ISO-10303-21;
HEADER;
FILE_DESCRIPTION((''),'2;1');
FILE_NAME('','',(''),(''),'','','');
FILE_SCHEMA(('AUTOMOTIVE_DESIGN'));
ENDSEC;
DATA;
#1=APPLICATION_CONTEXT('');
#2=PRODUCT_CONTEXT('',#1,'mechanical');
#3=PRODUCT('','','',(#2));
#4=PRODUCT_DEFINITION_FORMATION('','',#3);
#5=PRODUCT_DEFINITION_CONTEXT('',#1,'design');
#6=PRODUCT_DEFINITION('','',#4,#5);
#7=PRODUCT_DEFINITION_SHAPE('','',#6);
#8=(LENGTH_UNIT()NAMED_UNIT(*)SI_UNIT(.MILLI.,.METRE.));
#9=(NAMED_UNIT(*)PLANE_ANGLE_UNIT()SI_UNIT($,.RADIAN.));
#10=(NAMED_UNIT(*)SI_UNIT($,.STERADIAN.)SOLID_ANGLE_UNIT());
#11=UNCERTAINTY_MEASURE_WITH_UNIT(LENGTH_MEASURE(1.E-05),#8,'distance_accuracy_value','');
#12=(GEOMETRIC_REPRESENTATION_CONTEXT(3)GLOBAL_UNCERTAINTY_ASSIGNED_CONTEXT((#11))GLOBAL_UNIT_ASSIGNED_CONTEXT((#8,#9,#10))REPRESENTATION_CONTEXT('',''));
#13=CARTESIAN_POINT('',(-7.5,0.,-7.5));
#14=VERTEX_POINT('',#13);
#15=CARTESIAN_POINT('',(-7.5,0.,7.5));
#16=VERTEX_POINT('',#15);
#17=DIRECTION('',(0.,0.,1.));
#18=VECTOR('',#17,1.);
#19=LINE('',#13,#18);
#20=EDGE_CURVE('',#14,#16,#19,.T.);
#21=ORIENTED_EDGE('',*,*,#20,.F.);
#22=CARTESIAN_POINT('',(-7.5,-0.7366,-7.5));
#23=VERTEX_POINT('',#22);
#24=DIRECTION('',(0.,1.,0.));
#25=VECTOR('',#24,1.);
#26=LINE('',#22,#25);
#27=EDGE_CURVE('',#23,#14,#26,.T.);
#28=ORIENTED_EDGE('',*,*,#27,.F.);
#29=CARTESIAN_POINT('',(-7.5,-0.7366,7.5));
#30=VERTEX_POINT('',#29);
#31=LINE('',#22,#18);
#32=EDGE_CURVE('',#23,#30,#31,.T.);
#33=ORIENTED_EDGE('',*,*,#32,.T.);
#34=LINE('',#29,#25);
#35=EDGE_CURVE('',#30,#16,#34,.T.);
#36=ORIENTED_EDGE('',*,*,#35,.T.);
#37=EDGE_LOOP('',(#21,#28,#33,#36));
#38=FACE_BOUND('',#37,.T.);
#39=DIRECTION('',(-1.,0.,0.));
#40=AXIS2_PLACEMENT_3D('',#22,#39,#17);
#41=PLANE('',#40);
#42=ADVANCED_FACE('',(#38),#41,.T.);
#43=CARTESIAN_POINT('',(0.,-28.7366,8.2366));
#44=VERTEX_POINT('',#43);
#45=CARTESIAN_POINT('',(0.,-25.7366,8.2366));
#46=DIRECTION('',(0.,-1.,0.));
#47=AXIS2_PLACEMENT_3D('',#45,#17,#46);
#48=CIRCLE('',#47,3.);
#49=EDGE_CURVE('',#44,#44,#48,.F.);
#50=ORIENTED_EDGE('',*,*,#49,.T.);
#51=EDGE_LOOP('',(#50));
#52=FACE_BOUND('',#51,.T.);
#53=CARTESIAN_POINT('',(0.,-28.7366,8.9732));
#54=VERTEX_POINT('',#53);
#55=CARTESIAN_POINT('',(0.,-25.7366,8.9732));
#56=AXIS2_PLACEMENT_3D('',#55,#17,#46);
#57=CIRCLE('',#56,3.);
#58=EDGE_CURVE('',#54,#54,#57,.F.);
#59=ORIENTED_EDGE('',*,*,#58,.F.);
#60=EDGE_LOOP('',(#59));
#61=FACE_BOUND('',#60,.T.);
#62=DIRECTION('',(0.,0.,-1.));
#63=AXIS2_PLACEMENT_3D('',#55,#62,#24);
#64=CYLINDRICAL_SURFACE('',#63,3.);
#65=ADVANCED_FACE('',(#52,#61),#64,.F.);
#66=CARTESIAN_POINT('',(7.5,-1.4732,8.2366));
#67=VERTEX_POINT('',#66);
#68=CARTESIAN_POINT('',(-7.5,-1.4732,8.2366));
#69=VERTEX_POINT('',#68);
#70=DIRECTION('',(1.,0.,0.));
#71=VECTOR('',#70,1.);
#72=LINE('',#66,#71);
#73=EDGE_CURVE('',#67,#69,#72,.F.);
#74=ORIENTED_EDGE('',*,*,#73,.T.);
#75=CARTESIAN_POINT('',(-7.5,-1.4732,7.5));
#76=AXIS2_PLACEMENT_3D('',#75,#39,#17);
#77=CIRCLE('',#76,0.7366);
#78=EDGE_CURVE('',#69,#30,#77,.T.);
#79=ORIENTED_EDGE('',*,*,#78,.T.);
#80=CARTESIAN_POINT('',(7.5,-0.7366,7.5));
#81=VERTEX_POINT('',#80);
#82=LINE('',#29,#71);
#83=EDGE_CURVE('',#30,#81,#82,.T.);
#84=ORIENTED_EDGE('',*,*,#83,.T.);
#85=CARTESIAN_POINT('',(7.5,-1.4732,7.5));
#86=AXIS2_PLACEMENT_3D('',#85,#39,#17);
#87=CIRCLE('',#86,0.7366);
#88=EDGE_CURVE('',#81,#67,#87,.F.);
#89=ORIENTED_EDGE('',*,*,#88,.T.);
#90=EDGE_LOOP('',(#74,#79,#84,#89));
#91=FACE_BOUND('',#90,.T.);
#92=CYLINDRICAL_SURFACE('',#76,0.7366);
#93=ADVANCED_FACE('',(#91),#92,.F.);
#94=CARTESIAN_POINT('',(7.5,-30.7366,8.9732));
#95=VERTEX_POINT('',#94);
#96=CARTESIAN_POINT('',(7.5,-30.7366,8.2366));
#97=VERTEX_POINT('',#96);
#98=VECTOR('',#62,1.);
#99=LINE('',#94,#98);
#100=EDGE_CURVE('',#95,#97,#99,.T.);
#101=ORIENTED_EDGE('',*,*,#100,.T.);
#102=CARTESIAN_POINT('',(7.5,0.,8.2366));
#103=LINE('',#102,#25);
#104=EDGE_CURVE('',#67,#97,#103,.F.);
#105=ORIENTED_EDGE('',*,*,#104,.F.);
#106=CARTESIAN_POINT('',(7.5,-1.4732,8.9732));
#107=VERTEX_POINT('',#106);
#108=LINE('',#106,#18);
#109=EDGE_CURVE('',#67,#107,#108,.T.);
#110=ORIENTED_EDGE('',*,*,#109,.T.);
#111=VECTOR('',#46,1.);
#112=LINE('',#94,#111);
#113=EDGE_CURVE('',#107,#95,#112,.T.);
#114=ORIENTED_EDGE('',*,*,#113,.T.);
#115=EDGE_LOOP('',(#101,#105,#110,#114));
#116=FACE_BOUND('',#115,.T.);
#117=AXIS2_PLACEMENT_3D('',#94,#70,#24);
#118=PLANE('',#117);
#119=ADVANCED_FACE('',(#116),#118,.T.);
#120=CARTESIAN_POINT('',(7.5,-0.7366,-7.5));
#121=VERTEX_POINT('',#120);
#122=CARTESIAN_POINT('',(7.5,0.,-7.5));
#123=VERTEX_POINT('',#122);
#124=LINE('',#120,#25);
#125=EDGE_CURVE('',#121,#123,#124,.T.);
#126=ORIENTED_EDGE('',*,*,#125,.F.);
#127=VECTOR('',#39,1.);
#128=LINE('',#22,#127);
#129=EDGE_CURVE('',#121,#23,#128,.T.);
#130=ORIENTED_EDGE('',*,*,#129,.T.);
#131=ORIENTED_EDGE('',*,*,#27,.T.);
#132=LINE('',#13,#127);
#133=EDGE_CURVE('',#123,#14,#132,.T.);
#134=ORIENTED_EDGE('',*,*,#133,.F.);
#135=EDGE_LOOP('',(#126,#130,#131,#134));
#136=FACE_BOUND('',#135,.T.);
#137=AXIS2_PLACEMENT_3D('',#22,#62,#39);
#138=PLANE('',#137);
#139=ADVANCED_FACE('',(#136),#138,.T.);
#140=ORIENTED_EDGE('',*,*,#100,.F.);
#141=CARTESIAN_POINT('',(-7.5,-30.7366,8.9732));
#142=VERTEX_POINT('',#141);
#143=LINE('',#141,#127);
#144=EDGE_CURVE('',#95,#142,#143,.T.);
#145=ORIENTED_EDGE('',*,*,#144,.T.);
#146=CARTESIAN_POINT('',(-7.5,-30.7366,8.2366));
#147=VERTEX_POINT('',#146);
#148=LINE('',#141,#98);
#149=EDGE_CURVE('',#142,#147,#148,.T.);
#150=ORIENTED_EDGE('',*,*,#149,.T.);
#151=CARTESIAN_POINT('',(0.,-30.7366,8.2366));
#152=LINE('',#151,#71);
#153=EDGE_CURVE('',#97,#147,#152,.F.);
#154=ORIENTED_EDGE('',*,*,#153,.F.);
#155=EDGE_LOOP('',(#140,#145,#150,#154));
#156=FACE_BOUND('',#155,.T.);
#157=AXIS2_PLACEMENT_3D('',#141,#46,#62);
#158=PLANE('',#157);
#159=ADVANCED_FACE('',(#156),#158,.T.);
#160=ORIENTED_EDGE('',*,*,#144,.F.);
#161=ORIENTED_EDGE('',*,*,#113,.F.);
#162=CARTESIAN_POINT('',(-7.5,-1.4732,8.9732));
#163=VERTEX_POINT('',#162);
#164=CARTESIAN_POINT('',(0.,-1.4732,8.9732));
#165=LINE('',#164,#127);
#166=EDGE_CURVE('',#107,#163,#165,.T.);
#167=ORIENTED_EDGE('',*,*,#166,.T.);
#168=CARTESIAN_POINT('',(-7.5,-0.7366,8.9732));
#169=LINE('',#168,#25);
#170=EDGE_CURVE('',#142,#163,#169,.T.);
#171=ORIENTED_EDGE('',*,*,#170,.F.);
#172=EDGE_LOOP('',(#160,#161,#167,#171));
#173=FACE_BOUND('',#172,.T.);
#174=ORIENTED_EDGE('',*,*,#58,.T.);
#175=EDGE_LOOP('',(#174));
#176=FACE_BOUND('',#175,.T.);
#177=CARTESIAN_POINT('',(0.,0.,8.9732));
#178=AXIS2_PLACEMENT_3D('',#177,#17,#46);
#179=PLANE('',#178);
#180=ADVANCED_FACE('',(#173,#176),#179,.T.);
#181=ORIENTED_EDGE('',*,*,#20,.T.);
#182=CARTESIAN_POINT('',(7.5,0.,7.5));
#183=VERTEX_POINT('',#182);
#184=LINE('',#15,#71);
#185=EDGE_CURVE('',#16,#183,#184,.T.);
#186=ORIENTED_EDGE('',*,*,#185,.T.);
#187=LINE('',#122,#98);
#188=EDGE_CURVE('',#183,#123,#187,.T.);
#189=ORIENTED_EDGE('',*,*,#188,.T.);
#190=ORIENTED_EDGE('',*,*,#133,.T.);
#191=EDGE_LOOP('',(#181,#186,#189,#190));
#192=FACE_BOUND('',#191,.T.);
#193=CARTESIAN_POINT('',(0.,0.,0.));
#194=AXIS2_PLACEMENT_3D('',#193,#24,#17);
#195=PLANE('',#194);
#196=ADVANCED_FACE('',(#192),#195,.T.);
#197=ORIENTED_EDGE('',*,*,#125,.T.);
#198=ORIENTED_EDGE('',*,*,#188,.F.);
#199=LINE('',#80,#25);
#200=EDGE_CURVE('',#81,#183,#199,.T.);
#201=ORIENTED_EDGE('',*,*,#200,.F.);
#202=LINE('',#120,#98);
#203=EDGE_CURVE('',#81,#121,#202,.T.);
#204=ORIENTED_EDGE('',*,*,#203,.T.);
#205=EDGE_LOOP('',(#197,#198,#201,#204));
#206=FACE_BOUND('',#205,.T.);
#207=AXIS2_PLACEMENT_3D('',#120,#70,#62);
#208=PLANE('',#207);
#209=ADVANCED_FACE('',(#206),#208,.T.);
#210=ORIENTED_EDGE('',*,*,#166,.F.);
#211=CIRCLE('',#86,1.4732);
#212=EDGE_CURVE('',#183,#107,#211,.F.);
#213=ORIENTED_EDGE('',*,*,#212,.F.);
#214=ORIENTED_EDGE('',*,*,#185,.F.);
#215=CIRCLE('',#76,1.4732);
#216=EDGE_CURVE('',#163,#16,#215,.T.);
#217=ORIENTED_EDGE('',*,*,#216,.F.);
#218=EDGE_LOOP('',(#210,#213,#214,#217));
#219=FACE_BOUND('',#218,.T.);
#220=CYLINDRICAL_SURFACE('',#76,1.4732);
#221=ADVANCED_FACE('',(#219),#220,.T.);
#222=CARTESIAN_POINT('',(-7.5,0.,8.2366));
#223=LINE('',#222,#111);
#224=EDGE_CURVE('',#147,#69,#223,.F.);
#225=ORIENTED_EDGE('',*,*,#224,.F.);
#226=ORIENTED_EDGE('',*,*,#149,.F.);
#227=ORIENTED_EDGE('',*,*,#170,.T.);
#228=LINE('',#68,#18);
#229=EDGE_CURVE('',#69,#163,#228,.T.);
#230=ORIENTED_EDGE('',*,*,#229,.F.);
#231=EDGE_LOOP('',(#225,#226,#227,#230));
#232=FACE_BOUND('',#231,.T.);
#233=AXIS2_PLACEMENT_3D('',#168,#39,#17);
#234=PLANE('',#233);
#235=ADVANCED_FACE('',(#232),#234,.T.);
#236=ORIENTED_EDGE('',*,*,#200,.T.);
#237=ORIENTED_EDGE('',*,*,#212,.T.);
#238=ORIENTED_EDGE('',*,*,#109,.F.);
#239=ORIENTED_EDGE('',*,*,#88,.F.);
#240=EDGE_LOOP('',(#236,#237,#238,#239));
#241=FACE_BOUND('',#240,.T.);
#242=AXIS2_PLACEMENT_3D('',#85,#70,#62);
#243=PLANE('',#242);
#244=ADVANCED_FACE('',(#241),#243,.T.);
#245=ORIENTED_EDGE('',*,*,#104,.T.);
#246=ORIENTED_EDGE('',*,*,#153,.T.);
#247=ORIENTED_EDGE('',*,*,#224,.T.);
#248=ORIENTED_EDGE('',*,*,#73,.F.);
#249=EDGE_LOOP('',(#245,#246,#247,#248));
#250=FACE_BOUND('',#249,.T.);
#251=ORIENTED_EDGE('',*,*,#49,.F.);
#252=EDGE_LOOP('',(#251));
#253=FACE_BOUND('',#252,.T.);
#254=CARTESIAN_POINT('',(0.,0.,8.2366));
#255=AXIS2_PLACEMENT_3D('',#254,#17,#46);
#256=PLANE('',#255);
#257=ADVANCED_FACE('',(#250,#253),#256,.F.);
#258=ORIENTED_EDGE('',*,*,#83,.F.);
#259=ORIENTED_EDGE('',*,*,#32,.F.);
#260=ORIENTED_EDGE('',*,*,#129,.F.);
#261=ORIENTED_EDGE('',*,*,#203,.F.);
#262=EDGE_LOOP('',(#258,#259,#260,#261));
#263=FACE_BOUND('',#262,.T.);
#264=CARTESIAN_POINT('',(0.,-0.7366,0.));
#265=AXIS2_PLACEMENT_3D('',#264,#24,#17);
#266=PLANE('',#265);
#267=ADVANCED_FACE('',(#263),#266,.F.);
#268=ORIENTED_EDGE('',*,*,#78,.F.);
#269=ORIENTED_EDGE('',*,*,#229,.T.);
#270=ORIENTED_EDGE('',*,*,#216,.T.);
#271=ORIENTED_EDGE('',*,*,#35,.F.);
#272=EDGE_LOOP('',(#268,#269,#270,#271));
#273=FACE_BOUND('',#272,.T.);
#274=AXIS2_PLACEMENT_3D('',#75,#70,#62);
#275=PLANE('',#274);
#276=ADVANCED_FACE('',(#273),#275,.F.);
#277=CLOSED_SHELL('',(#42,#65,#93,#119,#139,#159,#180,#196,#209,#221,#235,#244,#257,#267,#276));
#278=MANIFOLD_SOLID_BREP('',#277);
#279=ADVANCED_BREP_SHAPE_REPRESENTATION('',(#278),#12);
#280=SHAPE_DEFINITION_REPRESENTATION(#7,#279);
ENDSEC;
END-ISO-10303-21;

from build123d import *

# Parameters (mm, degrees)
SKETCH1_W               = 15
SKETCH1_H               = 15
BASE_FLANGE1_DEPTH      = 0.7366
EDGE_FLANGE1_DEPTH      = 15
EDGE_FLANGE1_START      = -0.7366
EDGE_FLANGE1_PROFILE_W  = 15
EDGE_FLANGE1_PROFILE_H  = 29.2634
EDGE_FLANGE1_PROFILE_R  = 3
EDGE_FLANGE1_FLAT_DEPTH = 0.7366


# Sheet-metal steps are written as plain solids
with BuildPart() as part:
    # Sketch1 → Base-Flange1 (new body)
    with BuildSketch(Plane(origin=(0, 0, 0), x_dir=(1, 0, 0), z_dir=(0, 1, 0))):
        Rectangle(SKETCH1_W, SKETCH1_H)
    extrude(amount=-BASE_FLANGE1_DEPTH)

    # Edge-Flange1 bend section (across the edge) → Edge-Flange1 (add)
    with BuildSketch(Plane(origin=(7.5, -0.7366, 8.2366), x_dir=(0, 0, -1), z_dir=(-1, 0, 0))):
        with BuildLine():
            Line((-0.7366, 0.7366), (0, 0.7366))
            ThreePointArc((0, 0.7366), (0.215745145, 0.215745145), (0.7366, 0))
            Line((0.7366, 0), (0.7366, -0.7366))
            ThreePointArc((0.7366, -0.7366), (-0.30510971, -0.30510971), (-0.7366, 0.7366))
        make_face()
    extrude(amount=EDGE_FLANGE1_DEPTH)

    # Edge-Flange1 profile (on flange) → Edge-Flange1 flat (add)
    with BuildSketch(Plane(origin=(0, -0.7366, 8.2366), x_dir=(1, 0, 0), z_dir=(0, 0, -1)).offset(EDGE_FLANGE1_START)):
        with Locations((0, 15.3683)):
            Rectangle(EDGE_FLANGE1_PROFILE_W, EDGE_FLANGE1_PROFILE_H)
        with Locations((0, 25)):
            Circle(EDGE_FLANGE1_PROFILE_R, mode=Mode.SUBTRACT)
    extrude(amount=EDGE_FLANGE1_FLAT_DEPTH)


solid = part.part
